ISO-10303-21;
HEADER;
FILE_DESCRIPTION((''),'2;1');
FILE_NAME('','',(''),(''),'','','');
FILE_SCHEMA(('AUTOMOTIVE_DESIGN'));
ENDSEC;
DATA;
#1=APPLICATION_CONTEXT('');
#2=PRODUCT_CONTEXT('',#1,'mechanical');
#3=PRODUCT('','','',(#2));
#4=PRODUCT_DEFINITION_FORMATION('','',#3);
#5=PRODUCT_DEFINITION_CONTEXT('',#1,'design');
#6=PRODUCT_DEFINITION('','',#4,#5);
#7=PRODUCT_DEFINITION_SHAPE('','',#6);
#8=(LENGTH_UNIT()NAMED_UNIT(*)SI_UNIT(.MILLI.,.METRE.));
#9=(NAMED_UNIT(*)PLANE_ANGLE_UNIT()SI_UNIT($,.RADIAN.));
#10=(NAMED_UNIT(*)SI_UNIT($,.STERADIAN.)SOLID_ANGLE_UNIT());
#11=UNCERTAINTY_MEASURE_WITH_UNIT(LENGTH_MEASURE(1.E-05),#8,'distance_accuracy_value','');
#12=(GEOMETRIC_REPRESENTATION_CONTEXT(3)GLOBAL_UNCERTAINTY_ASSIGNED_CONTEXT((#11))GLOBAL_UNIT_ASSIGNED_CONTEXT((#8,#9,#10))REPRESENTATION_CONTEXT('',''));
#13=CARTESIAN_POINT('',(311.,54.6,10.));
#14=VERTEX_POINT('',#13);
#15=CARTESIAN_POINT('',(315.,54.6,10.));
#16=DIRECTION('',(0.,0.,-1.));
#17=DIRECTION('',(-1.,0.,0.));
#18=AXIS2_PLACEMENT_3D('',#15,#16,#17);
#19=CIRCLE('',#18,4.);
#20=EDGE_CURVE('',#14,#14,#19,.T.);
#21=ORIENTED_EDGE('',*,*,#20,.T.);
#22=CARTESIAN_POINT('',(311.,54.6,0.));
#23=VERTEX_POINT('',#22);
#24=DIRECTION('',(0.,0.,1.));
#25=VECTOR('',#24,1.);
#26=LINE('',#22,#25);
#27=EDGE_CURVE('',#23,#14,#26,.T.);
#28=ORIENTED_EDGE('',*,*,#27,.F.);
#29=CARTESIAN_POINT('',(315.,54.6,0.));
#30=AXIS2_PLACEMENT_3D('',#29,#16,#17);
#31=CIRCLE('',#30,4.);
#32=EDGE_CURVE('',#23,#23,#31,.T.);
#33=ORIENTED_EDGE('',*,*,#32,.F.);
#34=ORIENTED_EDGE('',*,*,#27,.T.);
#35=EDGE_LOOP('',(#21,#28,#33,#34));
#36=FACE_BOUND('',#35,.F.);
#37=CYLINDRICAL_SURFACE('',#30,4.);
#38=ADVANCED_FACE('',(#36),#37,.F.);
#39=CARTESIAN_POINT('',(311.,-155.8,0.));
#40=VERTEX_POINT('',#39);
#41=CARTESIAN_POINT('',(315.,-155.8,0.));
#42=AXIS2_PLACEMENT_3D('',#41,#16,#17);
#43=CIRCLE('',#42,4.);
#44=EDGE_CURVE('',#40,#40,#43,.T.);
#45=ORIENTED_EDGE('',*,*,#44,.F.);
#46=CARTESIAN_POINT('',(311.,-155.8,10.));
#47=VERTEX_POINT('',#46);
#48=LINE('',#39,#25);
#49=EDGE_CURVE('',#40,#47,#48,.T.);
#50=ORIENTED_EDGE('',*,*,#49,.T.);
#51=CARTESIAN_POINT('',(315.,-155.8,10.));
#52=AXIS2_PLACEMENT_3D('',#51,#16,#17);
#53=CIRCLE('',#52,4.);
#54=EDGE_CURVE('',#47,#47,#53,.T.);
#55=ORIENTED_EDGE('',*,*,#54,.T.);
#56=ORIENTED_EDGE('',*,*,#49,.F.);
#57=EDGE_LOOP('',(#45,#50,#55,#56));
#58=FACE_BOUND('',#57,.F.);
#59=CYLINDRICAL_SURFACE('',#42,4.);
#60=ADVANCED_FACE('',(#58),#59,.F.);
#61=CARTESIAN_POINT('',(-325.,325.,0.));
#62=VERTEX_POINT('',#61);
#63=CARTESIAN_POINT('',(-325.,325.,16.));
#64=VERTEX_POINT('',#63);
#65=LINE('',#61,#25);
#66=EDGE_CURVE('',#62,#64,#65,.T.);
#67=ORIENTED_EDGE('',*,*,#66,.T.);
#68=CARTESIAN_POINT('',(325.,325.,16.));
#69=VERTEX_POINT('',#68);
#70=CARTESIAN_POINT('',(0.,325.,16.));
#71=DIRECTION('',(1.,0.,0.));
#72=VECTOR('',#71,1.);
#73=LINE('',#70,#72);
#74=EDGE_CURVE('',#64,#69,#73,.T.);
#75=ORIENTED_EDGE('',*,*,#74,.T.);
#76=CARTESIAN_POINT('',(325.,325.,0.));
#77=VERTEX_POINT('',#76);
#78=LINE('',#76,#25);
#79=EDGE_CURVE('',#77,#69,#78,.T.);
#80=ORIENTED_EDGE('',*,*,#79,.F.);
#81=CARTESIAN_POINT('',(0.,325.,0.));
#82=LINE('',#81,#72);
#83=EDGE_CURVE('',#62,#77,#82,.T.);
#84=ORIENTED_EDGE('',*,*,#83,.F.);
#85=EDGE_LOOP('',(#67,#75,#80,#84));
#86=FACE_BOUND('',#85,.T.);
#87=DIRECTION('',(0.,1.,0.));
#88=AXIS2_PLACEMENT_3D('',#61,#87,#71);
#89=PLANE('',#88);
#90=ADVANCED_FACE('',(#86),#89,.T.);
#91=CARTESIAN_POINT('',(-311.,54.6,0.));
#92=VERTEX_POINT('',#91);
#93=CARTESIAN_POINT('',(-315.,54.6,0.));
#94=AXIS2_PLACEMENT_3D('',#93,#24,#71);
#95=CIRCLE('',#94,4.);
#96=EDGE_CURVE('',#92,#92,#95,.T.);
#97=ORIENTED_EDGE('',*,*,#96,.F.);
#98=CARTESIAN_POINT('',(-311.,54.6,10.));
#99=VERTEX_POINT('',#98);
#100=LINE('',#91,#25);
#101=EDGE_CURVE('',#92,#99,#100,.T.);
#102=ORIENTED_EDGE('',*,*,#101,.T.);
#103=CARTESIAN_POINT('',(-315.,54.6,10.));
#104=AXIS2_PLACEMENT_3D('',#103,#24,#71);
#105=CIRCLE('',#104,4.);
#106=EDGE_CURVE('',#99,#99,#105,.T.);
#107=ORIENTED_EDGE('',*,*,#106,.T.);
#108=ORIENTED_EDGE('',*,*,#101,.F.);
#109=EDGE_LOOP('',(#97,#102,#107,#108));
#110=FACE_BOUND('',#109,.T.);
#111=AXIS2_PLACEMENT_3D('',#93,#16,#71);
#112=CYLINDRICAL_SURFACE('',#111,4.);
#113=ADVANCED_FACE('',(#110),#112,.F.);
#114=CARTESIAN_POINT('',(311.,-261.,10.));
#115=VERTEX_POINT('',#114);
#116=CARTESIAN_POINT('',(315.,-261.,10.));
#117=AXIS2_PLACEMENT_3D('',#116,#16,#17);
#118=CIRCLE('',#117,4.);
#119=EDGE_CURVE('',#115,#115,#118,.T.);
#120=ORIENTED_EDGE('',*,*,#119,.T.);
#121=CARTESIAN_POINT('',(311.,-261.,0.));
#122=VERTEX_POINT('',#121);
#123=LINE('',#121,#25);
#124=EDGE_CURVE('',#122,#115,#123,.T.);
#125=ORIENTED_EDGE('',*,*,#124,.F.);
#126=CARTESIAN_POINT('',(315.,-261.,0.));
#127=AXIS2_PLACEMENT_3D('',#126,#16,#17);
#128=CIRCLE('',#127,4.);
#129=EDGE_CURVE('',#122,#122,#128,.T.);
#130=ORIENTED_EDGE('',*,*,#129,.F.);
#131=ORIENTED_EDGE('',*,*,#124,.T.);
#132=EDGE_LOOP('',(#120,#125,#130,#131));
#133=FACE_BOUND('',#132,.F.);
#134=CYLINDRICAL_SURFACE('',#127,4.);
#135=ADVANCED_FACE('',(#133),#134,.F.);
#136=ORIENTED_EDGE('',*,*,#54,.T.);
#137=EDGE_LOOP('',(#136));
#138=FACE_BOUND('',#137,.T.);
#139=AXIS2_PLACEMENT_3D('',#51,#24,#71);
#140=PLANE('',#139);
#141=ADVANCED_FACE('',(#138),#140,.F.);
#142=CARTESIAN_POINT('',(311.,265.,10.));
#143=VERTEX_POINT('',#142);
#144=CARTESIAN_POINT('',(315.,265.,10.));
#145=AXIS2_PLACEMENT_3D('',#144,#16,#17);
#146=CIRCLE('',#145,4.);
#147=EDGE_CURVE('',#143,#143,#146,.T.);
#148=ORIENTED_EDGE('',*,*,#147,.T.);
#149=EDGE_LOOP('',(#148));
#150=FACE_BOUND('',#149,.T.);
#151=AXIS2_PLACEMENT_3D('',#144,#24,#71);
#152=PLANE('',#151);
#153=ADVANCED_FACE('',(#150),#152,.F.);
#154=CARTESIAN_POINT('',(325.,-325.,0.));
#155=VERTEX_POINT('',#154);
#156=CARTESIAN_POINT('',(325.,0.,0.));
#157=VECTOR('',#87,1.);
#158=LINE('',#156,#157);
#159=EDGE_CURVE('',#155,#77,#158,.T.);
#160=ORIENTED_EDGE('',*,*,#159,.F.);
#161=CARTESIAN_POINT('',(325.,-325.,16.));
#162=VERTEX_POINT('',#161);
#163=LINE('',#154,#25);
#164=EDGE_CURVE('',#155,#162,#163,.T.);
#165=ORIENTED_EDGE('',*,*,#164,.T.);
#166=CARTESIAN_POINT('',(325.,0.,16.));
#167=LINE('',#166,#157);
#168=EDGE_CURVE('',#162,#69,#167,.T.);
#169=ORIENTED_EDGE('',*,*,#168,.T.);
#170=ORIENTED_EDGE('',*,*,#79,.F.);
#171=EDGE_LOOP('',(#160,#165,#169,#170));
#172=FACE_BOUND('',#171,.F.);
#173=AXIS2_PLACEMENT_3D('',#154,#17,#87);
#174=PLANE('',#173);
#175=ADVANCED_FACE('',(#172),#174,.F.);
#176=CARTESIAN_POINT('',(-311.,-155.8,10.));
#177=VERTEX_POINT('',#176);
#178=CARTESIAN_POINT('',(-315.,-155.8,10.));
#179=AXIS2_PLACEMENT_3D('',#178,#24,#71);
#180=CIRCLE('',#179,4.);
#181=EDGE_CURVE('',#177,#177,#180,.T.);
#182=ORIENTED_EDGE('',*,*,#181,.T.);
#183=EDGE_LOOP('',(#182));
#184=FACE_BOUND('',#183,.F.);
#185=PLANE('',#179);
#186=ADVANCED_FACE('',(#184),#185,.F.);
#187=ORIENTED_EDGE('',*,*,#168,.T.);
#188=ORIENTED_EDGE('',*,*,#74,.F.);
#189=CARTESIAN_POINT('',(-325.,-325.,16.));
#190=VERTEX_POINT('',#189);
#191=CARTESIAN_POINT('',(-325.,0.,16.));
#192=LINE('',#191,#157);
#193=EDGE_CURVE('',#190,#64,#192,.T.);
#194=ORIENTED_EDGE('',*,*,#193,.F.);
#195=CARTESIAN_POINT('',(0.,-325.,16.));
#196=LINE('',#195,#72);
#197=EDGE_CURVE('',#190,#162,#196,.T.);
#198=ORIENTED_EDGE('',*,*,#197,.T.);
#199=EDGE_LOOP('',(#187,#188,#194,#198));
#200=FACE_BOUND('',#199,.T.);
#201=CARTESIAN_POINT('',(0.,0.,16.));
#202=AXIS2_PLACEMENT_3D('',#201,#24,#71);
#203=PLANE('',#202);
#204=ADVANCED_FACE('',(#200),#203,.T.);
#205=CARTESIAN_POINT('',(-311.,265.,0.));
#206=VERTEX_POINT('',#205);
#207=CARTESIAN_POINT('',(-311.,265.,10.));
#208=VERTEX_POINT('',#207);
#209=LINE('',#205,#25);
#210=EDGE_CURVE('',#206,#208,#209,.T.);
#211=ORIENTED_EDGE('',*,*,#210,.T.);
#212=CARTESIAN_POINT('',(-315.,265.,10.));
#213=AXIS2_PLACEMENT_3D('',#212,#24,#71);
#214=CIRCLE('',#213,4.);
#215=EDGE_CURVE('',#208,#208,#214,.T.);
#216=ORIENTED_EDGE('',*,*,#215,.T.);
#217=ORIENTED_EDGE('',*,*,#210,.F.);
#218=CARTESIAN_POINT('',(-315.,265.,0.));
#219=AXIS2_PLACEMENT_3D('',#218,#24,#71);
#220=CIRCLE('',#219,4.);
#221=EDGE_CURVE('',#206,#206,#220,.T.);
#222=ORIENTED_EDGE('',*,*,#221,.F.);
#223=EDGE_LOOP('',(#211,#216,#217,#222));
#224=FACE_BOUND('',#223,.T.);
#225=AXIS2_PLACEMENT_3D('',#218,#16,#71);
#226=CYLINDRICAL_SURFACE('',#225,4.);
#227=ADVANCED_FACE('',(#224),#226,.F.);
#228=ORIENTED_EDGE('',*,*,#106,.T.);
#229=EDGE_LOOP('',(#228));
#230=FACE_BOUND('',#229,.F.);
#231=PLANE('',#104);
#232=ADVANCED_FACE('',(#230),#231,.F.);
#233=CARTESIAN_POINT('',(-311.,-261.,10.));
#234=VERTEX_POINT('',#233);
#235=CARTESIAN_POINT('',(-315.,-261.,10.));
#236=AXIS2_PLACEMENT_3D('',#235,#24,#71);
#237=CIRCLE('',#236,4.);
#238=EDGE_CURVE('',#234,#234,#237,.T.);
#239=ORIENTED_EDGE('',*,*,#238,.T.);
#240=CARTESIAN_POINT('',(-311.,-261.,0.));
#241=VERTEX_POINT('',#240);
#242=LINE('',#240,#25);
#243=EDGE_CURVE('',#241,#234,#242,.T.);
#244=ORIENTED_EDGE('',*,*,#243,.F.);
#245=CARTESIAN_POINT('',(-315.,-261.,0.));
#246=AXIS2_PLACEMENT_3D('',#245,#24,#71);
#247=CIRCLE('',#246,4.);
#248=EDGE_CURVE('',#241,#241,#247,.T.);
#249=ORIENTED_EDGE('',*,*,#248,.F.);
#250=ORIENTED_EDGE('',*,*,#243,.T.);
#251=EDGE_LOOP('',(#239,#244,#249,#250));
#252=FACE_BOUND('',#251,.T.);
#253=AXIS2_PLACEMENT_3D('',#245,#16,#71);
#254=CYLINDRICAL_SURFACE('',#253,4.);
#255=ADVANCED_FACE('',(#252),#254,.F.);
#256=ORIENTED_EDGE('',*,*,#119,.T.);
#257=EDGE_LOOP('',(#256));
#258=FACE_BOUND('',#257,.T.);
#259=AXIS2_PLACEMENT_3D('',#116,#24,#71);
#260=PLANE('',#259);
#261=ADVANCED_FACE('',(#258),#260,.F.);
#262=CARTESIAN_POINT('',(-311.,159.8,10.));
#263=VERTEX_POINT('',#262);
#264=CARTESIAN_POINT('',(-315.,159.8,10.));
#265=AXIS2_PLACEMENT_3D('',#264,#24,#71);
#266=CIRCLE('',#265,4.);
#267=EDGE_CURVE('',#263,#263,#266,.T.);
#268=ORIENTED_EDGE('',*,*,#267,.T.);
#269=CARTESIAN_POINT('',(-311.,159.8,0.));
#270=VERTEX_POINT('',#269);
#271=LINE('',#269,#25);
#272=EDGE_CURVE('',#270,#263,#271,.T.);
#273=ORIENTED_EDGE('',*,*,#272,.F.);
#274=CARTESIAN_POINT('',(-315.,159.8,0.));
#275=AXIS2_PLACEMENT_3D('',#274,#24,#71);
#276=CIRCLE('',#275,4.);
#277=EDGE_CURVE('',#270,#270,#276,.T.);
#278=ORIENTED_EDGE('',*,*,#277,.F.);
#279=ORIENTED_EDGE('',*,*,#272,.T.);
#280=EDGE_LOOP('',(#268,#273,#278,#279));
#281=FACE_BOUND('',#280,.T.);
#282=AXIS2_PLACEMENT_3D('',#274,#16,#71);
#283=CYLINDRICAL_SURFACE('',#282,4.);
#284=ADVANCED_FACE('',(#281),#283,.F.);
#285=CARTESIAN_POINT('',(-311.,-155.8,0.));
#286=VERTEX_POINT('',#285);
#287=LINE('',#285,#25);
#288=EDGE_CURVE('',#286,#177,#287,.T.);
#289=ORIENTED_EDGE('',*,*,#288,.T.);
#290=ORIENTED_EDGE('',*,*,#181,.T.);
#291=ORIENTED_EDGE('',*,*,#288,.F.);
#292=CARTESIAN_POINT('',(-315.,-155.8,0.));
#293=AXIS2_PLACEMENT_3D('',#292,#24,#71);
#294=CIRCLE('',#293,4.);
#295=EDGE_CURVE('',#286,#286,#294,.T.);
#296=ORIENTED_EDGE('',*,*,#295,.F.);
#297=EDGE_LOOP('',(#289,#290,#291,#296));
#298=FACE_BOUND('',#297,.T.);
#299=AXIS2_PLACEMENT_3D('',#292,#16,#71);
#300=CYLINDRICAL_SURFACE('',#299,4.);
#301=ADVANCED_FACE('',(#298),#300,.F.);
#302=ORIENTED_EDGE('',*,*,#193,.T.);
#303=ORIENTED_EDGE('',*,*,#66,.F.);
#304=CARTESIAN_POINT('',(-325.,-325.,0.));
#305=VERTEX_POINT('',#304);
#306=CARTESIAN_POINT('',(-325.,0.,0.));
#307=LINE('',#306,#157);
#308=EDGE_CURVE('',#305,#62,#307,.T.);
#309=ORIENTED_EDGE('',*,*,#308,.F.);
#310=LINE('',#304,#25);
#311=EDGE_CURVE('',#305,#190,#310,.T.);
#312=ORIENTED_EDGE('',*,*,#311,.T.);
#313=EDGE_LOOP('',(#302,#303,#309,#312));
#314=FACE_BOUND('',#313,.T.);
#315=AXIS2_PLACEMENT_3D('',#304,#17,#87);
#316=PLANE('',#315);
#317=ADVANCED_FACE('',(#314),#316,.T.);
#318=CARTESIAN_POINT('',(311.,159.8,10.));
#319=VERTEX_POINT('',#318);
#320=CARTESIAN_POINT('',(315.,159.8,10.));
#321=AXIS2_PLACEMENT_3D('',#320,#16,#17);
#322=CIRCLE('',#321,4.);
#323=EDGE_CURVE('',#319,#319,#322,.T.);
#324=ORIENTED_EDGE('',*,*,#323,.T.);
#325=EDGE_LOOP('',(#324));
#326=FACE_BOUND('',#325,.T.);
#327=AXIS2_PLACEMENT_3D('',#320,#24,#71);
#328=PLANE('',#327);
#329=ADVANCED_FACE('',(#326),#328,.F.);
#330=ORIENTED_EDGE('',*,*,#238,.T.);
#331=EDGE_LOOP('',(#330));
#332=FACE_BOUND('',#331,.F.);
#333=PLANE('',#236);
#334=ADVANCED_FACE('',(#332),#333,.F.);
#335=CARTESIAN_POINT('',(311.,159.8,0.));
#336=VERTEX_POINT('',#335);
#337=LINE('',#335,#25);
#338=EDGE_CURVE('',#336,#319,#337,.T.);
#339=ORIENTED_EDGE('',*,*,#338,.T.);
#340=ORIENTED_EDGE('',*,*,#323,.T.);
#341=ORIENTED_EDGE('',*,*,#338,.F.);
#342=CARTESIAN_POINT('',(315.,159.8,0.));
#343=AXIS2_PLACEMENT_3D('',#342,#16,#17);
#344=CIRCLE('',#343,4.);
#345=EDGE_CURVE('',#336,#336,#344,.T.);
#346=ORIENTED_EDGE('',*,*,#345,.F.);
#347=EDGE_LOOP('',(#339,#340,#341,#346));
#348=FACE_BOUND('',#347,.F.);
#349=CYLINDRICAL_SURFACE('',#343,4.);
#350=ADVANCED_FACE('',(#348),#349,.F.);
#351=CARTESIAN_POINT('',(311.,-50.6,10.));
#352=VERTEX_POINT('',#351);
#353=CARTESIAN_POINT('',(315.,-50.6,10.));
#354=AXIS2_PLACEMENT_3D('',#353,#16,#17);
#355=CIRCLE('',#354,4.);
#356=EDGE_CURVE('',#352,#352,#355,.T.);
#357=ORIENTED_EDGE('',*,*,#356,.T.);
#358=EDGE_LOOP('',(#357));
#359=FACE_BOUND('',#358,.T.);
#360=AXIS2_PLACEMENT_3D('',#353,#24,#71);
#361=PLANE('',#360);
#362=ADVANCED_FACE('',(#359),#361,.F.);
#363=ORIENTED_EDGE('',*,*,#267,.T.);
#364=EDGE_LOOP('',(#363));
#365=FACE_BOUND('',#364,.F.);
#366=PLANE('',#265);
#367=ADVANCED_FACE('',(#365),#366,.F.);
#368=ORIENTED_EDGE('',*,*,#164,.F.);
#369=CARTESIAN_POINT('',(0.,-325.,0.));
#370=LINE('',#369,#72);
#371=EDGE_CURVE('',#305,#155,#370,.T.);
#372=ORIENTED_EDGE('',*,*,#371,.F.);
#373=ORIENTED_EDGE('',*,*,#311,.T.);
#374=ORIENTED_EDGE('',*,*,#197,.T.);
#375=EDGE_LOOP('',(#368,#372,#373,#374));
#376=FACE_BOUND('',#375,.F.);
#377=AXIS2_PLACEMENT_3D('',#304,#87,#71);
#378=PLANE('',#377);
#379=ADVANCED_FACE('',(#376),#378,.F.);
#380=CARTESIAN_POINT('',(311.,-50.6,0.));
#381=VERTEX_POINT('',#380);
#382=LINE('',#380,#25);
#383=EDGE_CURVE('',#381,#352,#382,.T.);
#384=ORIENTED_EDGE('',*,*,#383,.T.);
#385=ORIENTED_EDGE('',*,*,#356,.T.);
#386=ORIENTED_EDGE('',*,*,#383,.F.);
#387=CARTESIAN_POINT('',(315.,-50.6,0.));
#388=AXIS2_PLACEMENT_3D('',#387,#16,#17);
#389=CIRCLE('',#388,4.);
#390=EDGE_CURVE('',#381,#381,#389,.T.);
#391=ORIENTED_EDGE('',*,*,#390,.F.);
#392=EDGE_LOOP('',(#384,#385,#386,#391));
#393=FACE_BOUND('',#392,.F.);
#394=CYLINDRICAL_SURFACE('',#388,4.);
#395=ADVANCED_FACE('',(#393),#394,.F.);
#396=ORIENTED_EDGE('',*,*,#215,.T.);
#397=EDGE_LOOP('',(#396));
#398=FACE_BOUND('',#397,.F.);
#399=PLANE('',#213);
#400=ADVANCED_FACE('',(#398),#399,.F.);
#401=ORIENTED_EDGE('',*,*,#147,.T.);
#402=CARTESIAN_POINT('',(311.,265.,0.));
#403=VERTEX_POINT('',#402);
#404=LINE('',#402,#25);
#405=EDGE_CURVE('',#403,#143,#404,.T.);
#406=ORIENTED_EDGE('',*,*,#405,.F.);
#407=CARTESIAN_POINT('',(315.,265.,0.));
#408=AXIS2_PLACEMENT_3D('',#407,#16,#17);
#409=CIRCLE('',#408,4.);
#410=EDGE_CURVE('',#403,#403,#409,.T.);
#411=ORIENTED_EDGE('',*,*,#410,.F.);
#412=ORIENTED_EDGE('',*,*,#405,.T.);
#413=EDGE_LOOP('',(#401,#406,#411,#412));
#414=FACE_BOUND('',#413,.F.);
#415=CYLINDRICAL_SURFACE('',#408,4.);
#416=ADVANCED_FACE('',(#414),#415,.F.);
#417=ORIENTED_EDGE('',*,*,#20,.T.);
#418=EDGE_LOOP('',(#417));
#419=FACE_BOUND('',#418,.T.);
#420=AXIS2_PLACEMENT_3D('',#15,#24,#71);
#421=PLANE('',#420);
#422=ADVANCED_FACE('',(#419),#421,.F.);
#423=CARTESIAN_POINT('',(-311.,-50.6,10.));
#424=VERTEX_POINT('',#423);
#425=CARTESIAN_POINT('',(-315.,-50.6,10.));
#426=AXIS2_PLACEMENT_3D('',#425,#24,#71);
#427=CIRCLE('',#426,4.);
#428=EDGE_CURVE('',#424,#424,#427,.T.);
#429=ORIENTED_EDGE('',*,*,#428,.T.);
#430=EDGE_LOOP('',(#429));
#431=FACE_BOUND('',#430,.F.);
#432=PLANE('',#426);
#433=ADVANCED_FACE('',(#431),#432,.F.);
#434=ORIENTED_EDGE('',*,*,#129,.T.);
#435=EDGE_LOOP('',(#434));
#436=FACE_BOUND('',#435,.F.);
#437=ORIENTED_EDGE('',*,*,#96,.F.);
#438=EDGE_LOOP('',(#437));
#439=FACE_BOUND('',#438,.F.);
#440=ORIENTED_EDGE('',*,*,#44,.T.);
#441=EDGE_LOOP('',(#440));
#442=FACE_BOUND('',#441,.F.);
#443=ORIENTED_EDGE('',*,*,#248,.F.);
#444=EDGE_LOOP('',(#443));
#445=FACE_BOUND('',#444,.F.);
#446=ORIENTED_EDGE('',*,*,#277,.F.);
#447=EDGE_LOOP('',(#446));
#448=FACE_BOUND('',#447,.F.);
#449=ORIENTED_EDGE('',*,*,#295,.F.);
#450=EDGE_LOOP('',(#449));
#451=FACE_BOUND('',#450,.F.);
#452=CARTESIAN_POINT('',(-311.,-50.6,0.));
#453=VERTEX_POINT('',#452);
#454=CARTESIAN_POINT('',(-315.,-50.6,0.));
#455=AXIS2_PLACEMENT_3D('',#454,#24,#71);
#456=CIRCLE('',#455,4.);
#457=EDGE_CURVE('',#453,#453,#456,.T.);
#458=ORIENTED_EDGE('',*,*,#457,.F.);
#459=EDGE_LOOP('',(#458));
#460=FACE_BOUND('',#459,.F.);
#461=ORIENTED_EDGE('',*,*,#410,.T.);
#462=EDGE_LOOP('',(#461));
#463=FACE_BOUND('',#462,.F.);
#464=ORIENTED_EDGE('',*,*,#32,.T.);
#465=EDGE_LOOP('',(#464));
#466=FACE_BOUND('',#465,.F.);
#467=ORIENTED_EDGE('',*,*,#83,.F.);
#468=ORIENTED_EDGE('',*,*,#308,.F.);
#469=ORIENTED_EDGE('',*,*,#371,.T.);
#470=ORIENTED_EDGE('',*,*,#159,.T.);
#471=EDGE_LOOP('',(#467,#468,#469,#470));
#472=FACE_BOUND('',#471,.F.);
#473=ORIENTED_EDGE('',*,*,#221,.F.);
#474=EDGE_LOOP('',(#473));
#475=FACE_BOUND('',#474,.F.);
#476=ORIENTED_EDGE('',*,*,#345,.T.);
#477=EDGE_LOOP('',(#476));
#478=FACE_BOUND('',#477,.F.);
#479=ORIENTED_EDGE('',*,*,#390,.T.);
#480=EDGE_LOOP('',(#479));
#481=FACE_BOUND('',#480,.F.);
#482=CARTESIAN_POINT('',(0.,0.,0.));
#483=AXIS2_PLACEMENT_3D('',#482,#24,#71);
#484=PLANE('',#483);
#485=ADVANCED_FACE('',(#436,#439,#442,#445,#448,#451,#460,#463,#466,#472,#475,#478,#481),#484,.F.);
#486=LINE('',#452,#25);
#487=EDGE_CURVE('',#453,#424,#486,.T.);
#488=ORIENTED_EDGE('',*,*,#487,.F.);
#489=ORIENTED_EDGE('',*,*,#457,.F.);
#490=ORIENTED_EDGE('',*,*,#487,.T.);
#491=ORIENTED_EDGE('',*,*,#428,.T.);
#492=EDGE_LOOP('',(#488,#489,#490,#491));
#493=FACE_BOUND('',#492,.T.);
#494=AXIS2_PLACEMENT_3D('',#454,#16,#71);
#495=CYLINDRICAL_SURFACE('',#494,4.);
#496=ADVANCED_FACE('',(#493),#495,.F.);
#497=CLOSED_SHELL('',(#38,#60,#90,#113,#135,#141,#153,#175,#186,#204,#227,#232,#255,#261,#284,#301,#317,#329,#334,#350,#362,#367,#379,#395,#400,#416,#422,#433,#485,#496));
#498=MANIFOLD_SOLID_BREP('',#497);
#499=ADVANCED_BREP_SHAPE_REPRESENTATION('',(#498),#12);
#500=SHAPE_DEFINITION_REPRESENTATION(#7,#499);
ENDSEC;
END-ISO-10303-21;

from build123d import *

# Parameters (mm, degrees)
F0_W     = 650
F0_H     = 650
F0_R     = 4
F1_DEPTH = 16
F2_DEPTH = 10


# Not quite as in the source:
# - a pattern or mirror of a feature is missing from the dataset's text; its kind, count and spacing are read off the source's solid


with BuildPart() as f1:
    # F0 (on Top) → F1 (new body)
    with BuildSketch(Plane.XY):
        Rectangle(F0_W, F0_H)
        with Locations((-315, -261)):
            Circle(F0_R, mode=Mode.SUBTRACT)
        with Locations((-315, -155.8)):
            Circle(F0_R, mode=Mode.SUBTRACT)
        with Locations((-315, -50.6)):
            Circle(F0_R, mode=Mode.SUBTRACT)
        with Locations((-315, 54.6)):
            Circle(F0_R, mode=Mode.SUBTRACT)
        with Locations((-315, 159.8)):
            Circle(F0_R, mode=Mode.SUBTRACT)
        with Locations((-315, 265)):
            Circle(F0_R, mode=Mode.SUBTRACT)
        with Locations((-315, 265)):
            Circle(F0_R)
        with Locations((-315, 159.8)):
            Circle(F0_R)
        with Locations((-315, 54.6)):
            Circle(F0_R)
        with Locations((-315, -50.6)):
            Circle(F0_R)
        with Locations((-315, -155.8)):
            Circle(F0_R)
        with Locations((-315, -261)):
            Circle(F0_R)
    extrude(amount=F1_DEPTH)

    # F0 (on Top) → F2 (cut)
    with BuildSketch(Plane.XY):
        with Locations((-315, 265)):
            Circle(F0_R)
        with Locations((-315, 159.8)):
            Circle(F0_R)
        with Locations((-315, 54.6)):
            Circle(F0_R)
        with Locations((-315, -50.6)):
            Circle(F0_R)
        with Locations((-315, -155.8)):
            Circle(F0_R)
        with Locations((-315, -261)):
            Circle(F0_R)
    f2 = extrude(amount=F2_DEPTH, mode=Mode.SUBTRACT)

    # F2_copies: F2 across plane
    add(f2.mirror(Plane(origin=(0, 0, 0), x_dir=(0, 0, 1), z_dir=(1, 0, 0))), mode=Mode.SUBTRACT)


solid = f1.part
